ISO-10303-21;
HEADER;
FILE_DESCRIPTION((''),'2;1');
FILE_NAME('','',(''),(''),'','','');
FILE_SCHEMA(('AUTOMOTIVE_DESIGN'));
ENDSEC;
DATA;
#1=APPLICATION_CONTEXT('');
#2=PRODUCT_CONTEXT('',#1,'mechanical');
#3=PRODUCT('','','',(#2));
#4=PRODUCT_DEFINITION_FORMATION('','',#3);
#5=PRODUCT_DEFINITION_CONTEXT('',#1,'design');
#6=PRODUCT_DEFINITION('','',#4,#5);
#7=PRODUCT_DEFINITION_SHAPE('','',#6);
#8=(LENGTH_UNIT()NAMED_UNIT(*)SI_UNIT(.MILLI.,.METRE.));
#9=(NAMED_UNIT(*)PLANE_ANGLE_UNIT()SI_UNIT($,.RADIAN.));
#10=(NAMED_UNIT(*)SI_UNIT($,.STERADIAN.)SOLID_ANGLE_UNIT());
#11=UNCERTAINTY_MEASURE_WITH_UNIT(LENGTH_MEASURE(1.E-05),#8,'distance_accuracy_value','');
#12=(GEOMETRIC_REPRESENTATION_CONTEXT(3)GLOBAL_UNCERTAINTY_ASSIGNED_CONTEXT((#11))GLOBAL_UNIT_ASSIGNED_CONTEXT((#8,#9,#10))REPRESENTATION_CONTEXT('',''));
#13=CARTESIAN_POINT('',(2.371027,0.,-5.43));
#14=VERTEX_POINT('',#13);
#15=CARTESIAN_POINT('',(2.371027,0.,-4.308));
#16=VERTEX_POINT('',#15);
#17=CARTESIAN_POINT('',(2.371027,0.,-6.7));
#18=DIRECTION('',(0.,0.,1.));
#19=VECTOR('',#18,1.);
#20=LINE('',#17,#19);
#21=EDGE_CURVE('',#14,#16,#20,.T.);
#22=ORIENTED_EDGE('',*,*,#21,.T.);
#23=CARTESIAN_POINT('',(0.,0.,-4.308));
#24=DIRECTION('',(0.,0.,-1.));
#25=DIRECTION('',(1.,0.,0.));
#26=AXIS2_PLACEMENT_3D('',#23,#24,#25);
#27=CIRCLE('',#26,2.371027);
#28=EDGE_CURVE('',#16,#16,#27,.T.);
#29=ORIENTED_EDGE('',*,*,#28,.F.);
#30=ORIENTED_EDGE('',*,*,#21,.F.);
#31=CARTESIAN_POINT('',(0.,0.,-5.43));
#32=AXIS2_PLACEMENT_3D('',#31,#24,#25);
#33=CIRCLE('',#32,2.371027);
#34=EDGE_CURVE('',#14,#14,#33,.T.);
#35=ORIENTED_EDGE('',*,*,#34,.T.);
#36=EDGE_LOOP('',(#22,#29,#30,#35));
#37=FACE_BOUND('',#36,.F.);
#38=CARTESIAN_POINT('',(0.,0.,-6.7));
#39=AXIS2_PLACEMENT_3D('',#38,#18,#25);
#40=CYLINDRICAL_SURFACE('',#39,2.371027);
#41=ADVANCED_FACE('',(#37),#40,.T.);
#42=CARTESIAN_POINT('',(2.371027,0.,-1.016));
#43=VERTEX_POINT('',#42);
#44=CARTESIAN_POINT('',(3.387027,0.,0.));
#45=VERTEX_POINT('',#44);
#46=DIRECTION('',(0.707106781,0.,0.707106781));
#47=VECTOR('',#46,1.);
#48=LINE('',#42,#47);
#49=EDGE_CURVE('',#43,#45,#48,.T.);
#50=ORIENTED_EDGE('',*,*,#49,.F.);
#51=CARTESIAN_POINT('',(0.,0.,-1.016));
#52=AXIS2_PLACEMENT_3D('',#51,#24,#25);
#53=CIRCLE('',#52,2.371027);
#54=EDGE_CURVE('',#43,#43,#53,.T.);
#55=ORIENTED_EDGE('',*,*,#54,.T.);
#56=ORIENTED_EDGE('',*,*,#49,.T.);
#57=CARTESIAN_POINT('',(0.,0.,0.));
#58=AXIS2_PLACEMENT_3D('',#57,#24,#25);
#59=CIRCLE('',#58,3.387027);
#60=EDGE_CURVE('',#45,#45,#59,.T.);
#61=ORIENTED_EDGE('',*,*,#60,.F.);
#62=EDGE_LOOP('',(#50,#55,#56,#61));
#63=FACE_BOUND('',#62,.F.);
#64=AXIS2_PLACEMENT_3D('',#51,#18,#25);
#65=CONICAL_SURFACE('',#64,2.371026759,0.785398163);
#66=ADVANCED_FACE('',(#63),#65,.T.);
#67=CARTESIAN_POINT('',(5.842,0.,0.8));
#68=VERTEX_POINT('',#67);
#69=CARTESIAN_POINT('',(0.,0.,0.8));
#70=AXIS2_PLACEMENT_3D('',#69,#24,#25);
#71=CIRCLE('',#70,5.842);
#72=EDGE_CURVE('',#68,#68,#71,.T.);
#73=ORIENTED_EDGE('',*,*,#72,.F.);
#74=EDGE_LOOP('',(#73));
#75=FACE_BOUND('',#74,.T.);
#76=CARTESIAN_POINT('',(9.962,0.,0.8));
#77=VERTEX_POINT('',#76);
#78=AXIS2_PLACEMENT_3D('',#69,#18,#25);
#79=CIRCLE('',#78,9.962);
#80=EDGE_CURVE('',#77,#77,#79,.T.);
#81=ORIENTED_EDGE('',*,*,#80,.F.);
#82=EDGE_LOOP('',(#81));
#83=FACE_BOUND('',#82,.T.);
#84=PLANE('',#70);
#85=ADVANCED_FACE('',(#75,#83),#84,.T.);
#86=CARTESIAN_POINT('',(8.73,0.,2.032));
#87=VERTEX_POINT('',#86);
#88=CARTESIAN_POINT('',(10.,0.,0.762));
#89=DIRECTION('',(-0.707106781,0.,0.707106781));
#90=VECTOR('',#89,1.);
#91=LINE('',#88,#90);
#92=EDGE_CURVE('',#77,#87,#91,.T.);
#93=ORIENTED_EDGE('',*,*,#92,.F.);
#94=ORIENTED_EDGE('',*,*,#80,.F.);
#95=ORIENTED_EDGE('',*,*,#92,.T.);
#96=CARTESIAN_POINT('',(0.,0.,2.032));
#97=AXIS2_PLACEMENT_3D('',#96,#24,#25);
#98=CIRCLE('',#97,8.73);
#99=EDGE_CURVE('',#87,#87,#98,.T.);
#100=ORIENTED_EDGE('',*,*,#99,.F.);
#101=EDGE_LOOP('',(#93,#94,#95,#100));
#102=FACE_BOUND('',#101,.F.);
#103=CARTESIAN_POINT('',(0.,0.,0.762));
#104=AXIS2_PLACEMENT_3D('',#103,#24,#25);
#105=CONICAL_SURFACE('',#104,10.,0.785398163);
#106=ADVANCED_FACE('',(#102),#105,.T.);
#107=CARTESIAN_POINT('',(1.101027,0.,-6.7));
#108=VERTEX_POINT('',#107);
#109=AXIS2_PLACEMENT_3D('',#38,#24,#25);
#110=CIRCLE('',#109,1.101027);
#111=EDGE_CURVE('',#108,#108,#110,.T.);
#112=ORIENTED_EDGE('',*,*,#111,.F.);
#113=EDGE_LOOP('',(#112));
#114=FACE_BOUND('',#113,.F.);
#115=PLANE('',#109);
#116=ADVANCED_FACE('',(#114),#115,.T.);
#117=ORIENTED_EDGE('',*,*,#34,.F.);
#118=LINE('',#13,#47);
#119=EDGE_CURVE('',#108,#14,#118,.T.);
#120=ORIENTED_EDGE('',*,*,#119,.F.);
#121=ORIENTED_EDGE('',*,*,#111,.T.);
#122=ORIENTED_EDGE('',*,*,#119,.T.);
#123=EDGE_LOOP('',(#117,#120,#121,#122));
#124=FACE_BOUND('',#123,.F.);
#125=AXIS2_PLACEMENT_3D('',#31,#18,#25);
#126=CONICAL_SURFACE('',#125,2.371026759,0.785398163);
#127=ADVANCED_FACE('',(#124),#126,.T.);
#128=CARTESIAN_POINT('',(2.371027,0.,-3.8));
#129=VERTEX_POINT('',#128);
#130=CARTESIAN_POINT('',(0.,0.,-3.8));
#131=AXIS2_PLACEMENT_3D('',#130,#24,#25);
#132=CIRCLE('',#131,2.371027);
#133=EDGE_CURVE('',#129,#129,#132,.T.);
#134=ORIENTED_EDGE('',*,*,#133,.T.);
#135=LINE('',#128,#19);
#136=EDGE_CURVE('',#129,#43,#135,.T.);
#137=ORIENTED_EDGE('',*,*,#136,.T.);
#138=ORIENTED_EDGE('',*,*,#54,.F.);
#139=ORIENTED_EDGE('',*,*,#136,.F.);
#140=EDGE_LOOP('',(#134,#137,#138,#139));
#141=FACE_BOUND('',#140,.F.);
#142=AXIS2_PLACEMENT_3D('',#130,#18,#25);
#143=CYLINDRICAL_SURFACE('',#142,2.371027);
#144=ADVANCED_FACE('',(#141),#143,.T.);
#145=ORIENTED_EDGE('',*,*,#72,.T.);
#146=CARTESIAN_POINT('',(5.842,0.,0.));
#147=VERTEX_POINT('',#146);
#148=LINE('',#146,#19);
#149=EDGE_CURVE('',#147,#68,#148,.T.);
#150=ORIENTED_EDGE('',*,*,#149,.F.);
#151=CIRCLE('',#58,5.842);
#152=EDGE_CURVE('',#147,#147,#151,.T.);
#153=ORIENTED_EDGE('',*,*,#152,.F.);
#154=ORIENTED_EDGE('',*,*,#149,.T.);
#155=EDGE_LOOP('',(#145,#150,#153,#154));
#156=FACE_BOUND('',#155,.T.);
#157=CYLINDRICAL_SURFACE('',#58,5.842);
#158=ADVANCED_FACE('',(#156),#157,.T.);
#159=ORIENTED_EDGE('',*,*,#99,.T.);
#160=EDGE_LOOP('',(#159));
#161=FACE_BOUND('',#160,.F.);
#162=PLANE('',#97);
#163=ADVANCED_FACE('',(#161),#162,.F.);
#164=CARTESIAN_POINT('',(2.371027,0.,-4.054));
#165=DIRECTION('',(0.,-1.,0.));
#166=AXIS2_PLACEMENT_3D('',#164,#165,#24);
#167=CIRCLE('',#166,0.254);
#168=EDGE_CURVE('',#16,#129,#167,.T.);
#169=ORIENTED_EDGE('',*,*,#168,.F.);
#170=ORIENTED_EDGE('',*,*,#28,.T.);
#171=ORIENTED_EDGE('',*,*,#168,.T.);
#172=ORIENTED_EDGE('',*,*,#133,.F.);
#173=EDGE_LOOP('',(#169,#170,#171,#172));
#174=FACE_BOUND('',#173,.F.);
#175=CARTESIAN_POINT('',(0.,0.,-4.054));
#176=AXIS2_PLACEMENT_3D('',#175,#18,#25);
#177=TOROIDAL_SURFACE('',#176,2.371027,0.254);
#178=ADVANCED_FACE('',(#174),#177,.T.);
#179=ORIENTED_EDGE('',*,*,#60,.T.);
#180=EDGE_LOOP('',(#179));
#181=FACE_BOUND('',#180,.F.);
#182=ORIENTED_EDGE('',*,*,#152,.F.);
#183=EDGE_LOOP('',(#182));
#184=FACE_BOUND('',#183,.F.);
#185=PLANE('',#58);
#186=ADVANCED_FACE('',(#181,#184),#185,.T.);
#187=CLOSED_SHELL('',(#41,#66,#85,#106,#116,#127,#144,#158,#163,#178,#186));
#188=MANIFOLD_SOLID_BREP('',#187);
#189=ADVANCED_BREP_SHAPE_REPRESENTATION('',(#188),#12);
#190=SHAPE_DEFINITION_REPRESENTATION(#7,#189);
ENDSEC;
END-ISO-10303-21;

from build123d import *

# Parameters (mm, degrees)
F2_SIZE  = 1.27
F3_R     = 14.2800405429
F3_R_2   = 10
F3_R_3   = 5.842
F4_DEPTH = 0.8
F5_SIZE  = 1.016


# Not quite as in the source:
# - a fillet or chamfer that OpenCascade refuses, or shapes differently, is made with other operations: its cross-section is extruded or revolved along the edge and cut away or added


with BuildPart() as f1:
    # F0 (on Front) → F1 (revolve)
    with BuildSketch(Plane.XZ):
        with BuildLine():
            Line((2.6757909362, 0), (4.2185683136, 0))
            Line((4.2185683136, 0), (10, 0))
            Line((10, 0), (10, 2.032))
            Line((10, 2.032), (0, 2.032))
            Line((0, 2.032), (0, 0))
            Line((0, 0), (0, -6.7))
            Line((0, -6.7), (2.3710267587, -6.7))
            Line((2.3710267587, -6.7), (2.3710267587, -4.308))
            ThreePointArc((2.3710267587, -4.308), (2.6250267587, -4.054), (2.3710267587, -3.8))
            Line((2.3710267587, -3.8), (2.3710267587, 0))
            Line((2.3710267587, 0), (2.6757909362, 0))
        make_face()
    revolve(axis=Axis((0, 0, 1.016), (0, 0, -1)))

    # F2
    f2_edges = [f1.edges().sort_by_distance(p)[0] for p in [
        (-2.371027, 0, -6.7),
    ]]
    chamfer(f2_edges, length=F2_SIZE)

    # F3 (on face) → F4 (cut)
    with BuildSketch(Plane(origin=(0, 0, 0), x_dir=(1, 0, 0), z_dir=(0, 0, -1))):
        Circle(F3_R)
        Circle(F3_R_2, mode=Mode.SUBTRACT)
        Circle(F3_R_2)
        Circle(F3_R_3, mode=Mode.SUBTRACT)
    extrude(amount=-F4_DEPTH, mode=Mode.SUBTRACT)

    # F5
    f5_edges = [f1.edges().sort_by_distance(p)[0] for p in [
        (-2.371027, 0, 0),
    ]]
    chamfer(f5_edges, length=F5_SIZE)

    # F6: chamfer of 1.27 on 1 edges, made by hand

    # F6_s1 → F6_t2 (revolve, cut)
    with BuildSketch(Plane.XZ):
        Polygon((10, 0.762), (8.73, 2.032), (10, 2.032), align=None)
    revolve(axis=Axis((0, 0, 2.032), (0, 0, -1)), mode=Mode.SUBTRACT)


solid = f1.part
